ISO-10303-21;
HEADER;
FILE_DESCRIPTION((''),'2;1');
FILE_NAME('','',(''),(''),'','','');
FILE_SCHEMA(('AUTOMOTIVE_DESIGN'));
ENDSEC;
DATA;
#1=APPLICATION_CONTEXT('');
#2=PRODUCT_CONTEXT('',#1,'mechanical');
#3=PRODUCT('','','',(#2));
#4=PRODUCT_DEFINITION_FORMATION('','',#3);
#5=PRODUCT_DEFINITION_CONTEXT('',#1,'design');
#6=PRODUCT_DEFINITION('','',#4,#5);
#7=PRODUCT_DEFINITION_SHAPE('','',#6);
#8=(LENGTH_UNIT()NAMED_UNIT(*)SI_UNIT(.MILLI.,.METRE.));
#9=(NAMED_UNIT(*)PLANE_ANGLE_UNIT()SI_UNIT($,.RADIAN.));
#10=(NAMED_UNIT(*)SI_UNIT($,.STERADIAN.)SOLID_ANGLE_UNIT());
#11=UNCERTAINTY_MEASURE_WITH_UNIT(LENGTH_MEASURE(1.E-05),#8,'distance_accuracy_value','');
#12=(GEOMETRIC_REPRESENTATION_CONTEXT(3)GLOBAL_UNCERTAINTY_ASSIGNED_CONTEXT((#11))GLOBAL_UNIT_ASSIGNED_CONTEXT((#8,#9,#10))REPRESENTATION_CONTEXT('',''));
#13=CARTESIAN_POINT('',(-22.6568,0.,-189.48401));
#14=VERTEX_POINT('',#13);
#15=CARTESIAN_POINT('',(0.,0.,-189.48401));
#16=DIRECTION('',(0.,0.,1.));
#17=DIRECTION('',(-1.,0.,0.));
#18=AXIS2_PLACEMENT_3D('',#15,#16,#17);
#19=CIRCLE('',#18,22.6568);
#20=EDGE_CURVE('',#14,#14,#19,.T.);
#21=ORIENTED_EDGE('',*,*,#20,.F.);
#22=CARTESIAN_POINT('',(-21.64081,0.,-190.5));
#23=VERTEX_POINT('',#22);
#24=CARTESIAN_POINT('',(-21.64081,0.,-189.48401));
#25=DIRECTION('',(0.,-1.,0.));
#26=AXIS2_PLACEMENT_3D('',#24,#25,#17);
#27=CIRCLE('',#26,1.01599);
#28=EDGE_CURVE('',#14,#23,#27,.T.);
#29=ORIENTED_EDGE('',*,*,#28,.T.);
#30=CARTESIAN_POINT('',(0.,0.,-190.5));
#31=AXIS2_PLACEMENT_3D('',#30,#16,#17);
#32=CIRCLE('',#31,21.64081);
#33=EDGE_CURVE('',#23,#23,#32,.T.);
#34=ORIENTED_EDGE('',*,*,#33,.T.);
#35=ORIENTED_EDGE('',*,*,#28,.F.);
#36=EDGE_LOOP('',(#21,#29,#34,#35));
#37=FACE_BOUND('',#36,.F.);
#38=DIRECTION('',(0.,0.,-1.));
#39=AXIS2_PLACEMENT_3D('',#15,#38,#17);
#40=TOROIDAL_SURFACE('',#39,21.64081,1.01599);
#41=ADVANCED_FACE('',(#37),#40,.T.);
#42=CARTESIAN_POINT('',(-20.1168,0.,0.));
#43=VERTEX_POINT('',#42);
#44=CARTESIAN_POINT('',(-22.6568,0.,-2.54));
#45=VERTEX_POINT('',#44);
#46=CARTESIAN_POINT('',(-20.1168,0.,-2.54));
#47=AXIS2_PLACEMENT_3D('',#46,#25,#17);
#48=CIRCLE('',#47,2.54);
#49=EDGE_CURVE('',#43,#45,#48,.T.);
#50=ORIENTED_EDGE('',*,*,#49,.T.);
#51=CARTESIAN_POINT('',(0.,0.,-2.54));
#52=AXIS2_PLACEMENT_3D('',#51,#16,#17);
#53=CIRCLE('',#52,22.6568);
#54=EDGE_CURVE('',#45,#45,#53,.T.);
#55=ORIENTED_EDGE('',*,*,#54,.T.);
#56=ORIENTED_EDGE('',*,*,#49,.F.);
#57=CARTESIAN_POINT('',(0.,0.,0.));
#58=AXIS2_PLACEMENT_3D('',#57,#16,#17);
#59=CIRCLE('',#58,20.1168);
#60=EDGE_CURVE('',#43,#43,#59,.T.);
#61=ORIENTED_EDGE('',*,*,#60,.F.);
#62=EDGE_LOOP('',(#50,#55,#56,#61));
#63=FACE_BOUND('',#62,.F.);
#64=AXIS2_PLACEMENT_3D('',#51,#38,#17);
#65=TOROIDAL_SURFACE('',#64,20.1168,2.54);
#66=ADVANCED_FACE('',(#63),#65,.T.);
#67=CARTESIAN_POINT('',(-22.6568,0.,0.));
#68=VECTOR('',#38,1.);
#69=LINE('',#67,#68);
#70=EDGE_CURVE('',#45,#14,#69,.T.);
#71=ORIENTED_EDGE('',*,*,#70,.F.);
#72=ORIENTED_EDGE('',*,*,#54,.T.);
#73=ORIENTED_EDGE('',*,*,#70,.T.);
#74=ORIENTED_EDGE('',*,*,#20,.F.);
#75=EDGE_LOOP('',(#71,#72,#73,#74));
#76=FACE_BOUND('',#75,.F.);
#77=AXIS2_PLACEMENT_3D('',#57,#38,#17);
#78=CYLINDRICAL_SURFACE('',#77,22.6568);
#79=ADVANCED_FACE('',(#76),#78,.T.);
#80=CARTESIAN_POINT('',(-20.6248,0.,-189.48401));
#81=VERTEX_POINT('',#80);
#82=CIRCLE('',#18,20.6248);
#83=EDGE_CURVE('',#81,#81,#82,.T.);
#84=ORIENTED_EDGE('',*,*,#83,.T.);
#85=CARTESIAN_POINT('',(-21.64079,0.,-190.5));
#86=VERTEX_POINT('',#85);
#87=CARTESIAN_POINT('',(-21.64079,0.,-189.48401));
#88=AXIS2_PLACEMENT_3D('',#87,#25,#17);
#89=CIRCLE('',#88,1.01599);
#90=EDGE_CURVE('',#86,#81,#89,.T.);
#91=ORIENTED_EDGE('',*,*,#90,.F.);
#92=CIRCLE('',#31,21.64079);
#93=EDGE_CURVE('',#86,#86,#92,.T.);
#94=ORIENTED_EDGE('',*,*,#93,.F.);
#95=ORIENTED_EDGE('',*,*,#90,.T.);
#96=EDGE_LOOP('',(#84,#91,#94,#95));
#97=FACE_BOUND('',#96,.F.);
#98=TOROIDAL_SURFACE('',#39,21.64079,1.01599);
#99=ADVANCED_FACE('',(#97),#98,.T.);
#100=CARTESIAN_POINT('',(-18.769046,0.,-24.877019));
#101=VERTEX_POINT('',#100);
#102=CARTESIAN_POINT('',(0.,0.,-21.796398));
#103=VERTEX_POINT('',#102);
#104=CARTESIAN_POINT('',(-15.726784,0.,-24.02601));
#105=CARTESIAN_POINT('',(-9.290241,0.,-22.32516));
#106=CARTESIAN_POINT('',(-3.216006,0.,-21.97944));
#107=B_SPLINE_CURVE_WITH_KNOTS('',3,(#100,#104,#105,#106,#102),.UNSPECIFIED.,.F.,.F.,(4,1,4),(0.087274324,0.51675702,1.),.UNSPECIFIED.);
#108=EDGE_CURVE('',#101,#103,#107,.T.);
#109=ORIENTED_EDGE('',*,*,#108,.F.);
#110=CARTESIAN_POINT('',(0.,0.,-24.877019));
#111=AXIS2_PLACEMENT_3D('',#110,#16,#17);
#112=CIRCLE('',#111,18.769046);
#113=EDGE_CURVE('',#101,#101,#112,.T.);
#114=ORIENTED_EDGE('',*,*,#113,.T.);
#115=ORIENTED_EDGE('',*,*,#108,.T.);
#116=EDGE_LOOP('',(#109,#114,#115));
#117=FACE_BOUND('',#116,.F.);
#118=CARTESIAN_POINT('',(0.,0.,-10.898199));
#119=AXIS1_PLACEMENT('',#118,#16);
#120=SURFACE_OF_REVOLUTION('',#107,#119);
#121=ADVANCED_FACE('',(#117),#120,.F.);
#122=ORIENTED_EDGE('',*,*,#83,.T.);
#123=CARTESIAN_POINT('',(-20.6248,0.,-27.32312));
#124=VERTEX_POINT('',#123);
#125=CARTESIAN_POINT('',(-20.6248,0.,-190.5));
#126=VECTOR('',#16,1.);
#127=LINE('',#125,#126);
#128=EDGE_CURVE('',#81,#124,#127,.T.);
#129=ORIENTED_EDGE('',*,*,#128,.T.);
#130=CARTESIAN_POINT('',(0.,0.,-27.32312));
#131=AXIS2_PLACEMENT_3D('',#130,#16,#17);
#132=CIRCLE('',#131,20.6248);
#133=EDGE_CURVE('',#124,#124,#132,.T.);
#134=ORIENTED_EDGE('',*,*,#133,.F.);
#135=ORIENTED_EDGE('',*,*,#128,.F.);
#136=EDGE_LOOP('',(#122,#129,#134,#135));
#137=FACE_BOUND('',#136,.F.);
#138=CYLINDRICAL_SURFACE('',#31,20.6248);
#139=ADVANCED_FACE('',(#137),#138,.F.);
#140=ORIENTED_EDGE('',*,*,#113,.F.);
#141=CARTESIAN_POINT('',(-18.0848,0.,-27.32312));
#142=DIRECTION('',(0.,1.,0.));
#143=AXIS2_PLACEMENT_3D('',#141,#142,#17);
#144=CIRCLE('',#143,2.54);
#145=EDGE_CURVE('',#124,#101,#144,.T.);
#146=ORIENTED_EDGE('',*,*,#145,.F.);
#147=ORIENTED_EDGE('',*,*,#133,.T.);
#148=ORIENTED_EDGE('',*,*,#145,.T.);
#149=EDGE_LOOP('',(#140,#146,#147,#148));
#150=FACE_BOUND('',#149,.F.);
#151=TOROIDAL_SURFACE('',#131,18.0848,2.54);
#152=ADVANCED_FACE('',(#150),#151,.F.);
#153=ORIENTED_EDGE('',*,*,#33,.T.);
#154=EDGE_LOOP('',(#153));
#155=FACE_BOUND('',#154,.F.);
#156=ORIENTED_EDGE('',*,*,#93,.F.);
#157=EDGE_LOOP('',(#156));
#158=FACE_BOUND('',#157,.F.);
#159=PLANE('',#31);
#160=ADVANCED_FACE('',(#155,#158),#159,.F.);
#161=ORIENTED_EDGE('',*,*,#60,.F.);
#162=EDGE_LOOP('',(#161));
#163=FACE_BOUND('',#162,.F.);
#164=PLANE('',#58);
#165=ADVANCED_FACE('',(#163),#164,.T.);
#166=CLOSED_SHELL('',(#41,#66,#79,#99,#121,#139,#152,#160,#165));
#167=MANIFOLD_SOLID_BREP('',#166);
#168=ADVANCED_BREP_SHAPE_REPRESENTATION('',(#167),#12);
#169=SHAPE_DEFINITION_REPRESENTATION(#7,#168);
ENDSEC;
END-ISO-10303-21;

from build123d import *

# Parameters (mm, degrees)
F2_R = 2.54
F3_R = 1.01599


# Not quite as in the source:
# - a fillet or chamfer is up to 0.001 mm smaller than in the source, because OpenCascade refuses the exact size


with BuildPart() as f1:
    # F0 (on Front) → F1 (revolve)
    with BuildSketch(Plane.XZ):
        with BuildLine():
            Line((0, -21.7963978648), (0, 0))
            Line((0, 0), (-22.6568, 0))
            Line((-22.6568, 0), (-22.6568, -190.5))
            Line((-22.6568, -190.5), (-20.6248, -190.5))
            Line((-20.6248, -190.5), (-20.6248, -27.3231199056))
            ThreePointArc((-20.6248, -27.3231199056), (-20.108359218, -25.7879299854), (-18.7690455975, -24.877019343))
            add(Edge.make_bspline(
                [(-18.7690455975, -24.877019343), (-15.7267844832, -24.0260102693), (-9.2902414756, -22.325160199), (-3.2160062892, -21.9794397154), (0, -21.7963978648)],
                knots=[0.0872743239, 0.0872743239, 0.0872743239, 0.0872743239, 0.5167570197, 1, 1, 1, 1], degree=3))
        make_face()
    revolve(axis=Axis((0, 0, -10.8981989324), (0, 0, 1)))

    # F2
    f2_edges = [f1.edges().sort_by_distance(p)[0] for p in [
        (22.6568, 0, 0),
    ]]
    fillet(f2_edges, radius=F2_R)

    # F3 (radius 1.016 in the source; OpenCascade refuses exactly that, so slightly less here)
    f3_edges = [f1.edges().sort_by_distance(p)[0] for p in [
        (22.6568, 0, -190.5),
        (20.6248, 0, -190.5),
    ]]
    fillet(f3_edges, radius=F3_R)


solid = f1.part
